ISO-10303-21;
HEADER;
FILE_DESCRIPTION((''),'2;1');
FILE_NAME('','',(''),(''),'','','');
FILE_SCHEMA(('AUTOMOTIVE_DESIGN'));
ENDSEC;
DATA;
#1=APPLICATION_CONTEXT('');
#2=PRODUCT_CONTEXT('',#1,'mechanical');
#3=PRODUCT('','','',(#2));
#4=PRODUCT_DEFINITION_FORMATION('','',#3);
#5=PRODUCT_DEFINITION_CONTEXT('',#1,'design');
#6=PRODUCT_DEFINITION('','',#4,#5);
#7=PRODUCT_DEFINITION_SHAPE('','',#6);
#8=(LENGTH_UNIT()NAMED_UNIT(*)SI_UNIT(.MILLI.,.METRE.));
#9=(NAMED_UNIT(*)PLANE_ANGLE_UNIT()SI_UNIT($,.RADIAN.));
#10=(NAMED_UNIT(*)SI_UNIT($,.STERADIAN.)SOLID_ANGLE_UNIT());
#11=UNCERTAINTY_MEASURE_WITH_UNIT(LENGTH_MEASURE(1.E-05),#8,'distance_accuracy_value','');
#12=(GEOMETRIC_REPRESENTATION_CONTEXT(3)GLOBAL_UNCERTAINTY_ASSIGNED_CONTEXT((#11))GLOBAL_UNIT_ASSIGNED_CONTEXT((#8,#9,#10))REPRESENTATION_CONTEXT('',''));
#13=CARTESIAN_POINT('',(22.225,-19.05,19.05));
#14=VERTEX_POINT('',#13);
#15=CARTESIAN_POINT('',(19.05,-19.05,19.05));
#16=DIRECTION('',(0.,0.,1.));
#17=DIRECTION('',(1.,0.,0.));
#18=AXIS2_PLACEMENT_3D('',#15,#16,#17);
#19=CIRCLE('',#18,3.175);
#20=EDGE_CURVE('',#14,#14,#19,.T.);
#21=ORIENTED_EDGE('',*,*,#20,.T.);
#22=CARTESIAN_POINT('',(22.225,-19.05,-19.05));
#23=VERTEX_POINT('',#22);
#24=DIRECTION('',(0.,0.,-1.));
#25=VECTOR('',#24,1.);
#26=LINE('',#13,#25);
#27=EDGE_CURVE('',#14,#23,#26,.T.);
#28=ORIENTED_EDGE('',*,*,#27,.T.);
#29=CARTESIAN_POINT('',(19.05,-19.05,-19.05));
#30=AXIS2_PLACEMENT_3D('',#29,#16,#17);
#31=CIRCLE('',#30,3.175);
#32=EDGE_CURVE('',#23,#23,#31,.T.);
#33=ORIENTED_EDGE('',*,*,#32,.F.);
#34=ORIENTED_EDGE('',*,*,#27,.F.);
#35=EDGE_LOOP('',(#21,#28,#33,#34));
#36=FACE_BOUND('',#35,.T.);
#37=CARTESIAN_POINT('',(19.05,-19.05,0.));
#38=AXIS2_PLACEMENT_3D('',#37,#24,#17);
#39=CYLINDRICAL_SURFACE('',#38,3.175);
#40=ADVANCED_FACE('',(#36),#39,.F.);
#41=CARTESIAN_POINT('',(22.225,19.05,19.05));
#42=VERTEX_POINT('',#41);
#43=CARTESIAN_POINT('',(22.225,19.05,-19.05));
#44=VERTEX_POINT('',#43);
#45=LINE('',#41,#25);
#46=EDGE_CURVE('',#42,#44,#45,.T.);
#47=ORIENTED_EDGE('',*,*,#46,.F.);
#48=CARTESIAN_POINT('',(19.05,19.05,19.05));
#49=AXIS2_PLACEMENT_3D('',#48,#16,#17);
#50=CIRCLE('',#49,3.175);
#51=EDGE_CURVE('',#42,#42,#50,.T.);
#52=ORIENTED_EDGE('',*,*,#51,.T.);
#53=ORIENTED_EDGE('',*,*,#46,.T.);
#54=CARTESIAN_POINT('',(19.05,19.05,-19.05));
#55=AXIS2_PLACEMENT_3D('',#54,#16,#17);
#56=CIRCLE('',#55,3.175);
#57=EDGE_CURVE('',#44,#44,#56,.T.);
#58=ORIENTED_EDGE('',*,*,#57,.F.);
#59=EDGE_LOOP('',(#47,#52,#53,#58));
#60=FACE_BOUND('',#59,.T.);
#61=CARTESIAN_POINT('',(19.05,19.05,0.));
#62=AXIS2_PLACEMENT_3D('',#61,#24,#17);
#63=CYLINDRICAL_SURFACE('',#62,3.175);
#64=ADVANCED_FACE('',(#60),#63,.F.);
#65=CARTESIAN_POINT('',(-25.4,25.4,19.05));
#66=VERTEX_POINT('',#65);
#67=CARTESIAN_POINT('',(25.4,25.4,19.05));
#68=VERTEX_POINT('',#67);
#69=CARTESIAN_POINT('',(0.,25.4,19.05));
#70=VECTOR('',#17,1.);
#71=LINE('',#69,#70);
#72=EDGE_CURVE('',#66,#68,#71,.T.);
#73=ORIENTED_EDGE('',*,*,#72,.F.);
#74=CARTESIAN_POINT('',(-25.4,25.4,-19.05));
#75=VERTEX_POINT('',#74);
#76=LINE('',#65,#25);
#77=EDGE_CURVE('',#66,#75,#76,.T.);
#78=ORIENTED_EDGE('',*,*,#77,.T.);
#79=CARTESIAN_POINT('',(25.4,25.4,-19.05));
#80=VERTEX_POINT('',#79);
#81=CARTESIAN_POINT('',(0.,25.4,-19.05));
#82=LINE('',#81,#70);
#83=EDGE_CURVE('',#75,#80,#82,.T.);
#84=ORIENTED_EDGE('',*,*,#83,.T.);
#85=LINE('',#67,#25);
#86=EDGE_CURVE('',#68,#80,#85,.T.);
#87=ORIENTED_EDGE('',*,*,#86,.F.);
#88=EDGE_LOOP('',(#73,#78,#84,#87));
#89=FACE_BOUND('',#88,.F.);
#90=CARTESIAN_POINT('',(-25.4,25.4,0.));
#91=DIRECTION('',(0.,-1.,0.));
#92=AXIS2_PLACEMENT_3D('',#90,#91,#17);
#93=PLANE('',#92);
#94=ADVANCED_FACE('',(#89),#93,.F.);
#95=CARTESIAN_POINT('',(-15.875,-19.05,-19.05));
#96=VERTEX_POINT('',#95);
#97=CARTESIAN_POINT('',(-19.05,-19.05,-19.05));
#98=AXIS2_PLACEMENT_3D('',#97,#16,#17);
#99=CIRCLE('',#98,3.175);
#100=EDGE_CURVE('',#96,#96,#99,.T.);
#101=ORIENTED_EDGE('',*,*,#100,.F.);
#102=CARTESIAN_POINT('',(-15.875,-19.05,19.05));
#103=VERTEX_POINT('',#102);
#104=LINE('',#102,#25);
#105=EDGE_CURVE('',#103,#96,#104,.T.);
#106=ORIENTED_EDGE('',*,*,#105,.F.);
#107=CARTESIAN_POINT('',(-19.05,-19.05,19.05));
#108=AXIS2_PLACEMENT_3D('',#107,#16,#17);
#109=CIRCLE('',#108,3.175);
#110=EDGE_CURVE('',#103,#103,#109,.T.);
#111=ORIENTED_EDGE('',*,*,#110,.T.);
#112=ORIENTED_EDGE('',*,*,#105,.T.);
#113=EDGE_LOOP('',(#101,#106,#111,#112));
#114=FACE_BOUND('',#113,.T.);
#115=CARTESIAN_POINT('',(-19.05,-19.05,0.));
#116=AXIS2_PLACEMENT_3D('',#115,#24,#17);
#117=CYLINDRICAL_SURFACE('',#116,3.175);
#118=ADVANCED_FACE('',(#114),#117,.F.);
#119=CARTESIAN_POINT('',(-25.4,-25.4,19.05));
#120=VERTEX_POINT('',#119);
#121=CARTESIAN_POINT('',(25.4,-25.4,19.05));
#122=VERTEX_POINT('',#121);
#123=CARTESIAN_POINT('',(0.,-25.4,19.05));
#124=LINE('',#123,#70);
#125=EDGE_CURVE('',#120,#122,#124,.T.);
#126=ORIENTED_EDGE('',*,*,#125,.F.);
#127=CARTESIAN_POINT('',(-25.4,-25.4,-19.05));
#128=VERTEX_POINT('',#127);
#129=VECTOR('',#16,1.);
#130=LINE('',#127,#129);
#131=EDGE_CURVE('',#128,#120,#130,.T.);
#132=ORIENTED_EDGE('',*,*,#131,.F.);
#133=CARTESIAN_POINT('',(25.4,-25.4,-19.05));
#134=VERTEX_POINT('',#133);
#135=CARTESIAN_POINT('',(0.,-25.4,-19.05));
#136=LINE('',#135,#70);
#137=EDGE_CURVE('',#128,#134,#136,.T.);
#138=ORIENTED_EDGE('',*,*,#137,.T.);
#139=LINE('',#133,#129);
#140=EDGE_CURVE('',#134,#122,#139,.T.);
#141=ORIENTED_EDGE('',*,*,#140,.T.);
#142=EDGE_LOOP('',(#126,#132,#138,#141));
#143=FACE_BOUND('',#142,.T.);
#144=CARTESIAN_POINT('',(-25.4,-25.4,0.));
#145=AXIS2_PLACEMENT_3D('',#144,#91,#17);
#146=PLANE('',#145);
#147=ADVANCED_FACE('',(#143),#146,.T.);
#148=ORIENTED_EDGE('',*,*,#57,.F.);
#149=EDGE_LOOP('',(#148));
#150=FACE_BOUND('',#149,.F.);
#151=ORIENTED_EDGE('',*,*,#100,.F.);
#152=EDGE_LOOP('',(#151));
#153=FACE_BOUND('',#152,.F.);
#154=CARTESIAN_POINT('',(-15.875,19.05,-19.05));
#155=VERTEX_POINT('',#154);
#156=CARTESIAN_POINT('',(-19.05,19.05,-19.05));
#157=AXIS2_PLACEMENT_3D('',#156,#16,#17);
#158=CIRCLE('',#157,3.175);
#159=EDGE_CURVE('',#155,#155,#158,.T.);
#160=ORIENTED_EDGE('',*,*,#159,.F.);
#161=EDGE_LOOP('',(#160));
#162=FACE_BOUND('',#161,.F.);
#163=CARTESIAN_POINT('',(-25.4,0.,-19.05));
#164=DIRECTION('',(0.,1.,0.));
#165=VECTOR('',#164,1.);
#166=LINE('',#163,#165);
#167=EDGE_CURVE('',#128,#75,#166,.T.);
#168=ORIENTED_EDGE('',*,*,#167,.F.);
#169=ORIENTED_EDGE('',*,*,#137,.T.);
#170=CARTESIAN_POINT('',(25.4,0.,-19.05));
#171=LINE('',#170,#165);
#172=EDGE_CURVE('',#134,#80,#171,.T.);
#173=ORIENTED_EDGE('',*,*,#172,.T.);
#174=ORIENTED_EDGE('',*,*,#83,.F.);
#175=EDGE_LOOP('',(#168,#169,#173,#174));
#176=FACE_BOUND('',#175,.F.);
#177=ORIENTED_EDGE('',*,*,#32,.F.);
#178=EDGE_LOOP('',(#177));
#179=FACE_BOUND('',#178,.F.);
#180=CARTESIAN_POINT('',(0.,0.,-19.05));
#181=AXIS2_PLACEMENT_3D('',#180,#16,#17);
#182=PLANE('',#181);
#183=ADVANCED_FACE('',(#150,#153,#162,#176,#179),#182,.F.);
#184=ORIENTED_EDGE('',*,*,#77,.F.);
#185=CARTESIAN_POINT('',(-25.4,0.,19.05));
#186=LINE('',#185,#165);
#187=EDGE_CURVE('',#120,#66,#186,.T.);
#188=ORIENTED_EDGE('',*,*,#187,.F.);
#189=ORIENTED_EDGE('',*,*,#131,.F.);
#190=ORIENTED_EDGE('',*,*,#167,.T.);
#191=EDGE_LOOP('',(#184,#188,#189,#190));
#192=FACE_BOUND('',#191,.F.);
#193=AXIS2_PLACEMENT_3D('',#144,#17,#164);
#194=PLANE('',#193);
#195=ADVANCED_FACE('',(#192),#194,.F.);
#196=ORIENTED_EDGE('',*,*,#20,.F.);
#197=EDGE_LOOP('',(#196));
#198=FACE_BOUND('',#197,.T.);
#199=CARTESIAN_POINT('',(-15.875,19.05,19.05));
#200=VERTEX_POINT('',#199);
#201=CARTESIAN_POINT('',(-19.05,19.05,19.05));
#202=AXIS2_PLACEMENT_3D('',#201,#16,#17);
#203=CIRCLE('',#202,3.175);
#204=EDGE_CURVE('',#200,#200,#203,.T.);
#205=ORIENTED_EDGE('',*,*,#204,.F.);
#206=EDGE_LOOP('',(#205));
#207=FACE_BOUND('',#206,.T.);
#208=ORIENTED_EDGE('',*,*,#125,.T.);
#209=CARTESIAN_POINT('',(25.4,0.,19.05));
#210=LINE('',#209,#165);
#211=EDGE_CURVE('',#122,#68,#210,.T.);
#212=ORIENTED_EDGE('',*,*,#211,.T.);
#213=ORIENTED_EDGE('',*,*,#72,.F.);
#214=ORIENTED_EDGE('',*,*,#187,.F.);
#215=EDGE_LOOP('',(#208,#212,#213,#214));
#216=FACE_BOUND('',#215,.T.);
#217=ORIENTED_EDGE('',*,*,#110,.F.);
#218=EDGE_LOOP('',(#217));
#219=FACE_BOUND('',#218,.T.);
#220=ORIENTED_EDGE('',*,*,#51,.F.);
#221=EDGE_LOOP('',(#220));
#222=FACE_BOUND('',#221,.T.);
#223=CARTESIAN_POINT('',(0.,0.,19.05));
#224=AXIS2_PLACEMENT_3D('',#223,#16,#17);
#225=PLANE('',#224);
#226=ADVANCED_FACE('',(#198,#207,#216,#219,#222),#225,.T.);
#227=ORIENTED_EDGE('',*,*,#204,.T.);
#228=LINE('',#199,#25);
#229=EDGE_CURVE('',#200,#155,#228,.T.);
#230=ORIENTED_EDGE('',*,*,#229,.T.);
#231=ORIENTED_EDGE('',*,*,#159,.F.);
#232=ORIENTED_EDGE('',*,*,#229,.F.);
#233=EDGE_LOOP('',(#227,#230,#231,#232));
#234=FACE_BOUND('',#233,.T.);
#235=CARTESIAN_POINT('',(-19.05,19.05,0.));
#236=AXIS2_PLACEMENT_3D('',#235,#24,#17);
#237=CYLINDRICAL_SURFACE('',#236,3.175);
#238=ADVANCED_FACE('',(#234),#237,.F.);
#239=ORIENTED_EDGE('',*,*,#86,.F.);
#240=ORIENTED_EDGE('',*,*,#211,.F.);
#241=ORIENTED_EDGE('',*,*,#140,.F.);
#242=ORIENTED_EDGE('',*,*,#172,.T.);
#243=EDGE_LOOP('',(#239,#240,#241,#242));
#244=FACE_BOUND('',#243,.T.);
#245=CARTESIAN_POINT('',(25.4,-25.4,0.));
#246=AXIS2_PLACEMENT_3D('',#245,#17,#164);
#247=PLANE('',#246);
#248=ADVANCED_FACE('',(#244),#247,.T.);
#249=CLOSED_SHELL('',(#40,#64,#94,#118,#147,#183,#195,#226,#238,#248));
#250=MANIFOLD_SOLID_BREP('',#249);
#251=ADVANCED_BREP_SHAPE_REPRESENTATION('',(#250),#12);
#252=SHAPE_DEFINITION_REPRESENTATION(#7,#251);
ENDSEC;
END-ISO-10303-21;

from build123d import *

# Parameters (mm, degrees)
F0_W     = 50.8
F0_H     = 50.8
F0_R     = 3.175
F1_DEPTH = 19.05


# Not quite as in the source:
# - the program builds the solid bodies; features that only make, move or delete a surface that nothing else refers to are left out


with BuildPart() as f1:
    # F0 (on Top) → F1 (new body, symmetric)
    with BuildSketch(Plane.XY):
        Rectangle(F0_W, F0_H)
        with Locations((-19.05, -19.05)):
            Circle(F0_R, mode=Mode.SUBTRACT)
        with Locations((19.05, -19.05)):
            Circle(F0_R, mode=Mode.SUBTRACT)
        with Locations((-19.05, 19.05)):
            Circle(F0_R, mode=Mode.SUBTRACT)
        with Locations((19.05, 19.05)):
            Circle(F0_R, mode=Mode.SUBTRACT)
    extrude(amount=F1_DEPTH, both=True)


solid = f1.part
